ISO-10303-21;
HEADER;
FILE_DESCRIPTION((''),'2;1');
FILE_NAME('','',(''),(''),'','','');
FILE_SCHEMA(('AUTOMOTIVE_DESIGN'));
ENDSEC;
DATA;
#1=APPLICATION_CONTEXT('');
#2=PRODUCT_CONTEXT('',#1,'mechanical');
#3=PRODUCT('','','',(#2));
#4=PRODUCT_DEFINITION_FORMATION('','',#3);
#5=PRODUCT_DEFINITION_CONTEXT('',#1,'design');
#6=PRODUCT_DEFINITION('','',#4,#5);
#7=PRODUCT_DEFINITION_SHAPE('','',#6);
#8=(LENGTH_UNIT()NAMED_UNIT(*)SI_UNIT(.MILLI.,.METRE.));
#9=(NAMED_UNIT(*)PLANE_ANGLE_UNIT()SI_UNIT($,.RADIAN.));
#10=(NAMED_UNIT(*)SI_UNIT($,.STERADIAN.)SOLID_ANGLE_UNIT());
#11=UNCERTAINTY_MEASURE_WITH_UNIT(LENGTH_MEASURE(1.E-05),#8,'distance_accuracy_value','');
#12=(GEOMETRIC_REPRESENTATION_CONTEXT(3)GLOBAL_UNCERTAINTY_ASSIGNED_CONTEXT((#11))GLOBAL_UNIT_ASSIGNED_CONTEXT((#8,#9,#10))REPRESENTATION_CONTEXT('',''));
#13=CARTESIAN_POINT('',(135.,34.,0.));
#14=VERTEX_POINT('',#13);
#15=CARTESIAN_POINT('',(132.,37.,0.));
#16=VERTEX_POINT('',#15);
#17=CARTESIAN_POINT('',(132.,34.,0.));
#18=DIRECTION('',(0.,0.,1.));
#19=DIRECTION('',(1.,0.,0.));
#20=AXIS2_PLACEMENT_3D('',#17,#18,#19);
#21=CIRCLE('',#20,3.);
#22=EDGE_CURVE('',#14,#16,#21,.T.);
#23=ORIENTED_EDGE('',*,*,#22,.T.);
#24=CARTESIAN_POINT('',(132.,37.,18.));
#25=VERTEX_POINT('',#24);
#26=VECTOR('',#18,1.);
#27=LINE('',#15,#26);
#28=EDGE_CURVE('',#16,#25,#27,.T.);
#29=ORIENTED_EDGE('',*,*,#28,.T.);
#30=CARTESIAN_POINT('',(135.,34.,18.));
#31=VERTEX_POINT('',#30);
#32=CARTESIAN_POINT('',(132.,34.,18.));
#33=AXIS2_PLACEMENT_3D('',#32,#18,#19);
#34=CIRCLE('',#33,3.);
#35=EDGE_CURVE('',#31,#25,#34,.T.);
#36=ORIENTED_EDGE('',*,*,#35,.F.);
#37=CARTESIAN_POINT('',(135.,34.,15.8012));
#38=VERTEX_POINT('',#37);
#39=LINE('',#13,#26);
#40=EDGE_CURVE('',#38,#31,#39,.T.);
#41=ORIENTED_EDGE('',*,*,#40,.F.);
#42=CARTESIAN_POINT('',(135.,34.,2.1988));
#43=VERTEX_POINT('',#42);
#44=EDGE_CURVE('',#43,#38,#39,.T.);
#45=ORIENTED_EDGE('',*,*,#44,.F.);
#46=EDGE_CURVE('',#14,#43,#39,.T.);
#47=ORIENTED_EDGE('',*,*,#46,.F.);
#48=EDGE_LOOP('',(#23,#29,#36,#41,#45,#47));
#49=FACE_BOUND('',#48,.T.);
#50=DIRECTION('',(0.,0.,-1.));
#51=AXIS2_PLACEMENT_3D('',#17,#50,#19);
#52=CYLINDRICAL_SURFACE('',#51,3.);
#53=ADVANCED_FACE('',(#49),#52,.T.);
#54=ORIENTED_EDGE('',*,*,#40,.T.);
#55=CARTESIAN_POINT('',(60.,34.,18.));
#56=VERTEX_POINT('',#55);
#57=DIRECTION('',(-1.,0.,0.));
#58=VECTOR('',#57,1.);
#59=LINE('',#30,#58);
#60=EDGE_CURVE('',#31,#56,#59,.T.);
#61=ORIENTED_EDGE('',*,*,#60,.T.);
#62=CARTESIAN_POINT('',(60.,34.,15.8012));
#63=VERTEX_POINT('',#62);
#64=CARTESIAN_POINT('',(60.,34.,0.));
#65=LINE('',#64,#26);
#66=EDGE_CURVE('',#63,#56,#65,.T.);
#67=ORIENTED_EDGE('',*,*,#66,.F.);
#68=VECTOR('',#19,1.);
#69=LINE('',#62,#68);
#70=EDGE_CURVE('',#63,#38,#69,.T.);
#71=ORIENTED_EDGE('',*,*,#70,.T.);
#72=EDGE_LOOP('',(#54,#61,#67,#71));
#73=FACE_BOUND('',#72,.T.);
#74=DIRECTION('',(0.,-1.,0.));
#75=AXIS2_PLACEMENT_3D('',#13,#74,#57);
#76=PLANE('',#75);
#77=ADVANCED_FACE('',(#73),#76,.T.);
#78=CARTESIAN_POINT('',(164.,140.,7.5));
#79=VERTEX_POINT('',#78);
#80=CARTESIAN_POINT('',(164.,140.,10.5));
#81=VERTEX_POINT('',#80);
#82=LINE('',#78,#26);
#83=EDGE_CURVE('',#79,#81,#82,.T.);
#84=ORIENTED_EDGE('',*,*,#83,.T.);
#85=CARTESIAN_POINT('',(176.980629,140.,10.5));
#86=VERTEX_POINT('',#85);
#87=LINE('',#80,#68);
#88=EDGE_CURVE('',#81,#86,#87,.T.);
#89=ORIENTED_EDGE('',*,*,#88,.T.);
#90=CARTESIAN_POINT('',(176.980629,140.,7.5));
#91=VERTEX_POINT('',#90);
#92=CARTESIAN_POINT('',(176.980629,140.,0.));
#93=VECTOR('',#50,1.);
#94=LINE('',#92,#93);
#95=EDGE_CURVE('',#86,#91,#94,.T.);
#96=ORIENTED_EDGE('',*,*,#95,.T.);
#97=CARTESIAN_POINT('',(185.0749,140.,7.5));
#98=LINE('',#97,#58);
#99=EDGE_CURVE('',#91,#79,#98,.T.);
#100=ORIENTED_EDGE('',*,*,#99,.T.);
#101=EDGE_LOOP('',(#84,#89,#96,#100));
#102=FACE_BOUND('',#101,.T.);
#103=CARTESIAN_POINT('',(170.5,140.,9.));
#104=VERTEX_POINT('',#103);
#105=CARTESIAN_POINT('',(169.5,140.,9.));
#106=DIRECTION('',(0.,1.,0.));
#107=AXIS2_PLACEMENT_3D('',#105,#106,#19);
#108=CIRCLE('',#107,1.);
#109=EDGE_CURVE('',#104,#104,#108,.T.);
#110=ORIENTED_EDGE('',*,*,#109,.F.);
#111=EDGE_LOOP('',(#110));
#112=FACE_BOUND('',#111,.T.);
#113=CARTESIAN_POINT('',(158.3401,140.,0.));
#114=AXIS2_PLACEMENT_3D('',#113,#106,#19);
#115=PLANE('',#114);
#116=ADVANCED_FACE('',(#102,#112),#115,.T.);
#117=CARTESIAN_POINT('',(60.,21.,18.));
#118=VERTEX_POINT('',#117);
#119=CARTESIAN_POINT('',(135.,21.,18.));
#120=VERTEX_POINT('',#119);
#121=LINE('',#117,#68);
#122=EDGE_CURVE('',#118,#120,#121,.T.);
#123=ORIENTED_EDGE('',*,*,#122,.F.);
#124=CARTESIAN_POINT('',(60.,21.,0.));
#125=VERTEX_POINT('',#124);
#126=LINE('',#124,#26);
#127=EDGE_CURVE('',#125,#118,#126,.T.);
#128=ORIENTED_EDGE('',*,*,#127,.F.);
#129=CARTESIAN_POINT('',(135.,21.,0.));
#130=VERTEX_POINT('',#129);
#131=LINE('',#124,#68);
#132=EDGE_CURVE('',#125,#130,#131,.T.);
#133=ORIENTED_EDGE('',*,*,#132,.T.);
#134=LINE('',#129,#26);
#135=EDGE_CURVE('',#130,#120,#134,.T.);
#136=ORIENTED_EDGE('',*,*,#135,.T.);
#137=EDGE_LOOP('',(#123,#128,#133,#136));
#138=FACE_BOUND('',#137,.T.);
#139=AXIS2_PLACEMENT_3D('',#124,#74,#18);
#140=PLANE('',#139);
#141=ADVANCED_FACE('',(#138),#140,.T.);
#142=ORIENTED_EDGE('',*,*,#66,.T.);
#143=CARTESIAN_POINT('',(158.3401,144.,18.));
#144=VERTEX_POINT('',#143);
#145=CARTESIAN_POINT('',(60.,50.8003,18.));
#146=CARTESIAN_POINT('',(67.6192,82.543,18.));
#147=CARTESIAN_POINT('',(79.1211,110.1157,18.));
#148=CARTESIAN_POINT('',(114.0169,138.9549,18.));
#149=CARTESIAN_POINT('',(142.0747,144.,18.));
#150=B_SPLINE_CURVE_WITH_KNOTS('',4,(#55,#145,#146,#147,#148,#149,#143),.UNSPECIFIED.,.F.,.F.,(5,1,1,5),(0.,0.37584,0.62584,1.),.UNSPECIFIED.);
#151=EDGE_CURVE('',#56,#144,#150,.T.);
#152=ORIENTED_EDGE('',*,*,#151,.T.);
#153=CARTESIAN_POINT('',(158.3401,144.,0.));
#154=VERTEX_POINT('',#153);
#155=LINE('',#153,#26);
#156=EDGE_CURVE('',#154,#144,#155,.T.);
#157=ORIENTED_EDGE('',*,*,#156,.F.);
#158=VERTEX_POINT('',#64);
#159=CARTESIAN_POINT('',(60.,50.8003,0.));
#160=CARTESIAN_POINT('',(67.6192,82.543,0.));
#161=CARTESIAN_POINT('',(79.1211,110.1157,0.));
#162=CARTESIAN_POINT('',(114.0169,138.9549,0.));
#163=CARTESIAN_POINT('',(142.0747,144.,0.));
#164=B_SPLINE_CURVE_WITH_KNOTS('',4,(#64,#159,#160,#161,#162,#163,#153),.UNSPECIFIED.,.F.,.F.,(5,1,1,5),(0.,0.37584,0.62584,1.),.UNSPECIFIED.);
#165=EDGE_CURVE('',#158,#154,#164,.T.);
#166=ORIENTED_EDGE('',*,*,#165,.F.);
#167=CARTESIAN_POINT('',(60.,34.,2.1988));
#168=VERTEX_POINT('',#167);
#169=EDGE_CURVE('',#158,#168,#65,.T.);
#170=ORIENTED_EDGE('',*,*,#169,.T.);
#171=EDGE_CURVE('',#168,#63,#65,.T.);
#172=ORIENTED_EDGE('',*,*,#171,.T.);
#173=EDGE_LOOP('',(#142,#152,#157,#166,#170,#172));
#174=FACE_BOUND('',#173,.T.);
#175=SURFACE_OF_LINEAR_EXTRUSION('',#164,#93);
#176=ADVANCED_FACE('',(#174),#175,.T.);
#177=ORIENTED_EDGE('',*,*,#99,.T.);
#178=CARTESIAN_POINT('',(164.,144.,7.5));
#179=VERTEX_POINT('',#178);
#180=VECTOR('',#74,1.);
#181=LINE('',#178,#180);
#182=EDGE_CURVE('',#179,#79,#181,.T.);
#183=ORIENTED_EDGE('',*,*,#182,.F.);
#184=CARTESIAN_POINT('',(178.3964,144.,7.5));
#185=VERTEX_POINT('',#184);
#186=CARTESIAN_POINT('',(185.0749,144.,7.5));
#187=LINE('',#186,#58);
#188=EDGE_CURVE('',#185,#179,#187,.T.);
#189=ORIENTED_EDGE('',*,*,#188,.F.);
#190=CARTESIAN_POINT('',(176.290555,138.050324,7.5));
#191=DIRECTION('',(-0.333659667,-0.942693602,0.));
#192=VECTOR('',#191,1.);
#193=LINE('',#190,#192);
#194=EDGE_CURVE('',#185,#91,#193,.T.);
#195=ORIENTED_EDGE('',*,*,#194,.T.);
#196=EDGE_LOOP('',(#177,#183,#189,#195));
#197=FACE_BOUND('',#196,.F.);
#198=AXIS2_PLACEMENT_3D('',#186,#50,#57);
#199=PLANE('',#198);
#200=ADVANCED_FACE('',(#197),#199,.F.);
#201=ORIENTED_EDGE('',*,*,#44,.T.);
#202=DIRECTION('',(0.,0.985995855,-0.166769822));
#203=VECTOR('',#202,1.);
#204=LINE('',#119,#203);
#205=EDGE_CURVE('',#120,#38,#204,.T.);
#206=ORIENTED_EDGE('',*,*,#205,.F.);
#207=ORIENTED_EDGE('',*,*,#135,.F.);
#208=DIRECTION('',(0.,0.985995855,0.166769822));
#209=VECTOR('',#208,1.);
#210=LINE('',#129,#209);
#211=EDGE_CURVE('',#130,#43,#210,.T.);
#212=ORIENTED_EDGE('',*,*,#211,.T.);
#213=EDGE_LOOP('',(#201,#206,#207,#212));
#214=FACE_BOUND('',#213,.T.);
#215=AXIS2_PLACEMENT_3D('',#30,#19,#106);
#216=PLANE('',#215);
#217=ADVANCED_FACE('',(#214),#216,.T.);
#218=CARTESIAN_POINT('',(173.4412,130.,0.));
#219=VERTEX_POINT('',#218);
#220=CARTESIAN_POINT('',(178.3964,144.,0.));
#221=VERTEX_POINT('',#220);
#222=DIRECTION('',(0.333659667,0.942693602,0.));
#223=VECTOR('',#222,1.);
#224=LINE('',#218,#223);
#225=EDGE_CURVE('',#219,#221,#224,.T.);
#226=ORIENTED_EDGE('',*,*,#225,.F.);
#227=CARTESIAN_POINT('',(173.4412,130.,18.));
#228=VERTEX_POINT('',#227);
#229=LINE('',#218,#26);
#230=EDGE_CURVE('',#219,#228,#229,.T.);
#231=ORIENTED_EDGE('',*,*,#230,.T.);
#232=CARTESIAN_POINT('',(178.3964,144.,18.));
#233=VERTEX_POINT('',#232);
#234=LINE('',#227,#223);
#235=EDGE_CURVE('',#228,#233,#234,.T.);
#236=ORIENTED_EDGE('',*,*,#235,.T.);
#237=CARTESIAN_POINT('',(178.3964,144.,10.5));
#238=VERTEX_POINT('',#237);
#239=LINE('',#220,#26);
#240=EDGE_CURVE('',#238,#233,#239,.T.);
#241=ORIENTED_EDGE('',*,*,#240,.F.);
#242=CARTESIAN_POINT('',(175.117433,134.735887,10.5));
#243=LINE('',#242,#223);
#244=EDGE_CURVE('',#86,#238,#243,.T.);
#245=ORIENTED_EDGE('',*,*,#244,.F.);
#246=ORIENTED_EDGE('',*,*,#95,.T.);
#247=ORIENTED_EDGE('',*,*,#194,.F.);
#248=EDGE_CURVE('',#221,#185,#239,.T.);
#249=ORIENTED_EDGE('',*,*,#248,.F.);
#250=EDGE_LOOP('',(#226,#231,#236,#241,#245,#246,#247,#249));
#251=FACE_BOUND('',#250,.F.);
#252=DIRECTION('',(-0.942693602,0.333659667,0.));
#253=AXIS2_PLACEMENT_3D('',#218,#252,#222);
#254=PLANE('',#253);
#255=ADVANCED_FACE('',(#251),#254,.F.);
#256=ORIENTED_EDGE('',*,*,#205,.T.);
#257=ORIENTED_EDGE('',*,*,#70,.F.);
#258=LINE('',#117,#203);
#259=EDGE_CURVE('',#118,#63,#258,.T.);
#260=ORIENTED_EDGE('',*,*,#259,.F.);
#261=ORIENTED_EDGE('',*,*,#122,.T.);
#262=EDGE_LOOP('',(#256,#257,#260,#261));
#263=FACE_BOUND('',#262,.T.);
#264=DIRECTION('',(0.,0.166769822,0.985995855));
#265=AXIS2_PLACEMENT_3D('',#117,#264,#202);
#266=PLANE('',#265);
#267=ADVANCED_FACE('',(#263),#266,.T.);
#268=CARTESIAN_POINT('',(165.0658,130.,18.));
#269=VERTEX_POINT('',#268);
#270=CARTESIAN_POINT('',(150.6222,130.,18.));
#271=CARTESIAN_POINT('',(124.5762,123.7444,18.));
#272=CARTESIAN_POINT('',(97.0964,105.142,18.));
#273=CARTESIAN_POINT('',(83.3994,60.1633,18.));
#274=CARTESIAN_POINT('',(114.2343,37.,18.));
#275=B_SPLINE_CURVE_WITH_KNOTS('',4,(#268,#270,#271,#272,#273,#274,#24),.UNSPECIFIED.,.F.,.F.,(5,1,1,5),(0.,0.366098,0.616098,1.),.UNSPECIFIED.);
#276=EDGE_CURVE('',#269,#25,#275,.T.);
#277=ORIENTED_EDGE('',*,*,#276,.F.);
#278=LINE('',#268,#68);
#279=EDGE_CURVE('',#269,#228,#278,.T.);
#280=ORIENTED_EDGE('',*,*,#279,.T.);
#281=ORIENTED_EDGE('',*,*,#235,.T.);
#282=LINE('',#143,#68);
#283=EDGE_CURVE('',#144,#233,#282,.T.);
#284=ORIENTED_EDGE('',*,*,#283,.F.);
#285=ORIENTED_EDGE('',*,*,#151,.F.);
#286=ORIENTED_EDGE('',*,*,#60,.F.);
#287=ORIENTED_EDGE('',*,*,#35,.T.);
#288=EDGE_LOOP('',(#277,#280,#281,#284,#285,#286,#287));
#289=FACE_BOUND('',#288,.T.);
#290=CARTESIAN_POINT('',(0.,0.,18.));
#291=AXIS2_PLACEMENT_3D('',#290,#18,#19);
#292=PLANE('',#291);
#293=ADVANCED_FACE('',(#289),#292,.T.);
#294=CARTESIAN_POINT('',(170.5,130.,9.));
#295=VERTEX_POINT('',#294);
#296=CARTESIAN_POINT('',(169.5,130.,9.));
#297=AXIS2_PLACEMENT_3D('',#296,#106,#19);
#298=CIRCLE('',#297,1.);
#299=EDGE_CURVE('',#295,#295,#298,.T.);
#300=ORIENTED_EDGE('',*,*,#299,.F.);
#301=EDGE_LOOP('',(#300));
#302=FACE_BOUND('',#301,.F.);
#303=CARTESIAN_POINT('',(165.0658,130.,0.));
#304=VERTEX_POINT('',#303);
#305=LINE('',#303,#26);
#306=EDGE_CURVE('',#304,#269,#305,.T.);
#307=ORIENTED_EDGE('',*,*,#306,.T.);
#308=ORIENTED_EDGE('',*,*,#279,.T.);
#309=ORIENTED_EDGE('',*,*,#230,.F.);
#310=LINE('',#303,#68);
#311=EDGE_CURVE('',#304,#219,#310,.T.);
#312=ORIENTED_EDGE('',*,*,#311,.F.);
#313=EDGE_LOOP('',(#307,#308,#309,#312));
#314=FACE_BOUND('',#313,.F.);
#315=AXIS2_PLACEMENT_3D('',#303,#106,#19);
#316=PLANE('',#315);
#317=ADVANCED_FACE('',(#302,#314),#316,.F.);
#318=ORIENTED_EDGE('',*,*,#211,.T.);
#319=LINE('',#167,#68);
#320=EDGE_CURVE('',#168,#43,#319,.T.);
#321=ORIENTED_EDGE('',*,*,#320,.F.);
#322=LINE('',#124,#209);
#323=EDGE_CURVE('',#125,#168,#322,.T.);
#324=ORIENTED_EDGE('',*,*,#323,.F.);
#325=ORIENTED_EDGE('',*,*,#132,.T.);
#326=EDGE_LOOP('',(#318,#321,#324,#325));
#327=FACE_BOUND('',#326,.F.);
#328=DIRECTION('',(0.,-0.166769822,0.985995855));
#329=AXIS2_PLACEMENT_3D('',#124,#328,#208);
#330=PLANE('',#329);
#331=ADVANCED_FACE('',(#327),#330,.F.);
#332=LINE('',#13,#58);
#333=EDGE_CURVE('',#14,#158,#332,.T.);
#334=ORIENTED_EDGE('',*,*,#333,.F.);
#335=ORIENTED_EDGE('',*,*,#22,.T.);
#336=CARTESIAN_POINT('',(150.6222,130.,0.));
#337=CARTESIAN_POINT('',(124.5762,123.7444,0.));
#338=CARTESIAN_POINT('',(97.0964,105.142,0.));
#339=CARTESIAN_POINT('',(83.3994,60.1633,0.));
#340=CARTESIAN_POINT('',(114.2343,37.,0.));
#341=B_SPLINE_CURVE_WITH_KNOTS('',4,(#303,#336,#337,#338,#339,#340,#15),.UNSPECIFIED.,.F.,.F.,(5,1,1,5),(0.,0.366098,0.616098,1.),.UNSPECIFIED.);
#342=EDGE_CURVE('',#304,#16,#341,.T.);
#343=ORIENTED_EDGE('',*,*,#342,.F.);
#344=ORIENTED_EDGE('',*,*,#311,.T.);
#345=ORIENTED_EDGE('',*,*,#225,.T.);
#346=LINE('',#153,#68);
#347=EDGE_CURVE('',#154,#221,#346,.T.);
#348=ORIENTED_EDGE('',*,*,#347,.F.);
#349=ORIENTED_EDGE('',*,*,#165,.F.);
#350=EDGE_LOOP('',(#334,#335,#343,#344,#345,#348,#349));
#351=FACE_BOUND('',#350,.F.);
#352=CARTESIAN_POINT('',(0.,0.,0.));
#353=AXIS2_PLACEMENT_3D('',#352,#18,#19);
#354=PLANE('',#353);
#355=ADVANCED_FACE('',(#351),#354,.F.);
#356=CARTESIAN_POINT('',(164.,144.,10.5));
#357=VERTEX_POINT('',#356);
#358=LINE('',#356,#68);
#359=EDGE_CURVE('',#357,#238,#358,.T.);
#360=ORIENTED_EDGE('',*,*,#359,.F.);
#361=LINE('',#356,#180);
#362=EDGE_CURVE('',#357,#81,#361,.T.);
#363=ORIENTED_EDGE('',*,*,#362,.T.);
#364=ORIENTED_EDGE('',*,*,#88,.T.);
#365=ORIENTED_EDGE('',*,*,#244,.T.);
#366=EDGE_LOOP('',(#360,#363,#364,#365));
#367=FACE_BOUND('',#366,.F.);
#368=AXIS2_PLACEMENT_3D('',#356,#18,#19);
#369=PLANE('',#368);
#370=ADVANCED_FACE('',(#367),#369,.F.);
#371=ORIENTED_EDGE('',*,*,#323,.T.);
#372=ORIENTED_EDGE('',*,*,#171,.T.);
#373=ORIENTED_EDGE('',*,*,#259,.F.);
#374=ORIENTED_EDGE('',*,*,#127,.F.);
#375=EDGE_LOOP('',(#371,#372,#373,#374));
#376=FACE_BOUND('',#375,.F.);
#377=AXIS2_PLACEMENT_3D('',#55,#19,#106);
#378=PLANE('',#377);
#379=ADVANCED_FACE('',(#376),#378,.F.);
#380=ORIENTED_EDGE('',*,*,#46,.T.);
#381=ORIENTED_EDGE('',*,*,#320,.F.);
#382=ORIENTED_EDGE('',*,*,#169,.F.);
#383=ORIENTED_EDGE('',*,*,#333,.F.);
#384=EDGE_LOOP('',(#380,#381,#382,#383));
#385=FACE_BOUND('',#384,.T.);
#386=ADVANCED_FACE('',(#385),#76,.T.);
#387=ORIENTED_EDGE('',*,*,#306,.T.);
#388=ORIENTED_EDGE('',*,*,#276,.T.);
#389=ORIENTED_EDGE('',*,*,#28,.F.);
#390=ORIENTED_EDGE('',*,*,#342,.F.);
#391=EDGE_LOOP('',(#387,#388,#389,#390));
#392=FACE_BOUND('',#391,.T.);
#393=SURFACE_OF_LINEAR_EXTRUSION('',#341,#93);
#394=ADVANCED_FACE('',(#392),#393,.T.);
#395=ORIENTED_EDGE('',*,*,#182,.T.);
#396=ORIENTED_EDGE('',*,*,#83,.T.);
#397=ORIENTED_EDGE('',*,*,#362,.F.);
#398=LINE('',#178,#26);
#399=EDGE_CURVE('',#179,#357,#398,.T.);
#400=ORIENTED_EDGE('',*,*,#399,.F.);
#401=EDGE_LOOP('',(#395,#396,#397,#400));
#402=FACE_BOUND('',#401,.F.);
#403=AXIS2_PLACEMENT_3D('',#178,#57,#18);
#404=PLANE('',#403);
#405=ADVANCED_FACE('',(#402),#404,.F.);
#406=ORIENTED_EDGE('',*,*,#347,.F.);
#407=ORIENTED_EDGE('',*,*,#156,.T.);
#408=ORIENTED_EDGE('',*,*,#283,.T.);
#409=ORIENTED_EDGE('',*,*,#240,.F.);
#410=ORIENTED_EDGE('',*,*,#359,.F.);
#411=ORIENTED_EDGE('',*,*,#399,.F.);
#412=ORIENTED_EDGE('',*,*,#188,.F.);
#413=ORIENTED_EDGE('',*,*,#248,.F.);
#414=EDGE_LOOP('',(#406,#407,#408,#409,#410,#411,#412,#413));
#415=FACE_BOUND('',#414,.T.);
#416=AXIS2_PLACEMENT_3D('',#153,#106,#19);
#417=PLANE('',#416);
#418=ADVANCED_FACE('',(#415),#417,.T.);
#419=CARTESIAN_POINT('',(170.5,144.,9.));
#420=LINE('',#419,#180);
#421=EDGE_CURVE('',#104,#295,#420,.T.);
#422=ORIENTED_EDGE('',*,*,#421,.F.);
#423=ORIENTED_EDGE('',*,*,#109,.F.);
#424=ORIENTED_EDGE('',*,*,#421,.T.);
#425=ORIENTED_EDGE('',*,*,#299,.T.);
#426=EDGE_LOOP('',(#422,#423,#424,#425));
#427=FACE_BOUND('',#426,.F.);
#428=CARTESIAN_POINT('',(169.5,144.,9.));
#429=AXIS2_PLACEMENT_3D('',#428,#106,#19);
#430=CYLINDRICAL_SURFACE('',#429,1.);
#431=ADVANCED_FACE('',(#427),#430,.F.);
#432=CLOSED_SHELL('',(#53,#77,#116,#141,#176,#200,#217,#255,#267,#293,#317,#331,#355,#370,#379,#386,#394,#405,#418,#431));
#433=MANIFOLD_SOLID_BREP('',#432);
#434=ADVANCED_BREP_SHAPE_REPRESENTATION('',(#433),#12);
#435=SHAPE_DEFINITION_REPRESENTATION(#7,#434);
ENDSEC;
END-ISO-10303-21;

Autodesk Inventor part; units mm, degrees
ref_plane "XZ Plane" through (0, 0, 0) normal (0, 1, 0) x (-1, 0, 0)
ref_plane "XY Plane" through (0, 0, 0) normal (0, 0, 1) x (1, 0, 0)
sketch "Sketch1" plane through (0, 0, 0) normal (0, 0, 1) x (1, 0, 0)
  line L0 (60, 34) -> (279, 34) construction
  line L1 (279, 34) -> (279, 16) construction
  line L2 (279, 16) -> (60, 16) construction
  line L3 (60, 16) -> (60, 34) construction
  line L4 (158.3401, 144) -> (180.6599, 144)
  line L5 (-98.1271, 119.3914) -> (-155.2055, 119.3914) construction
  line L6 (60, 204.7828) -> (279, 204.7828) construction
  line L7 (279, 204.7828) -> (279, 222.7828) construction
  line L8 (279, 222.7828) -> (60, 222.7828) construction
  line L9 (60, 222.7828) -> (60, 204.7828) construction
  line L10 (158.3401, 94.7828) -> (180.6599, 94.7828) construction
  line L11 (169.5, 144) -> (169.5, 94.7828) construction
  circle A0 centre (169.5, 144.5) radius 4.5 construction
  circle A1 centre (169.5, 94.2828) radius 4.5 construction
  line L12 (165, 140) -> (174, 140) construction
  spline S0 degree 4 poles (60, 34) (60, 50.8003) (67.6192, 82.543) (79.1211, 110.1157) (114.0169, 138.9549) (142.0747, 144) (158.3401, 144) knots 0 0 0 0 0 0.37584 0.62584 1 1 1 1 1
  line L13 (436.9307, -63.7999) -> (436.9307, -111.3151) construction
  line L14 (165.0658, 130) -> (173.4412, 130)
  line L15 (173.4412, 130) -> (178.3964, 144)
  line L16 (178.3964, 144) -> (180.6599, 144)
  line L17 (166.2744, 149) -> (172.7256, 149) construction
  spline S1 degree 4 poles (165.0658, 130) (150.6222, 130) (124.5762, 123.7444) (97.0964, 105.142) (83.3994, 60.1633) (114.2343, 37) (132, 37) knots 0 0 0 0 0 0.366098 0.616098 1 1 1 1 1
  line L18 (158.3401, 94.7828) -> (180.6599, 94.7828) construction
  line L19 (178.3964, 94.7828) -> (180.6599, 94.7828) construction
  line L20 (180.6599, 94.7828) -> (158.3401, 94.7828) construction
  spline S2 degree 4 poles (173.9342, 106.4847) (188.3699, 106.4847) (225.2165, 124.0597) (250.4536, 142.2568) (239.0722, 211.617) (207.7908, 202.4847) knots 0 0 0 0 0 0.376784 1 1 1 1 1 construction
  spline S3 degree 4 poles (279, 204.7828) (275.6992, 148.3745) (255.9313, 132.0927) (229.7092, 97.2581) (180.6599, 94.7828) knots 0 0 0 0 0 1 1 1 1 1 construction
  line L21 (173.9342, 106.4847) -> (158.8804, 106.4847) construction
  line L22 (160.6036, 94.7828) -> (158.3401, 94.7828) construction
  line L23 (158.8804, 106.4847) -> (160.6036, 94.7828) construction
  arc A2 (135, 34) -> (132, 37) centre (132, 34) ccw
  line L24 (135, 34) -> (60, 34)
  point P0 (0, 0)
  point P1 (169.5, 34)
  point P2 (169.5, 204.7828)
  point P3 (93.4315, 204.7828)
  point P4 (169.5, 140)
  point P5 (69.0653, 81.3021)
  point P6 (84.771, 109.712)
  point P7 (114.2865, 133.8506)
  point P8 (169.5, 149)
  point P9 (126.5497, 121.1282)
  point P10 (101.7633, 99.5435)
  point P11 (94.9383, 64.5723)
  point P12 (209.9254, 118.4197)
  point P13 (233.3153, 142.9189)
  point P14 (236.6483, 184.5924)
  point P15 (268.3461, 156.1626)
  point P16 (250.8428, 129.4297)
  point P17 (224.4145, 107.9607)
  dimension "d0" = 18
  dimension "d2" = 219
  dimension "d4" = 16
  dimension "d5" = 60
  dimension "d6" = 110
  dimension "d9" = 9
  dimension "d11" = 10
  dimension "exposed" = 5
  dimension "d13" = 14
  dimension "d23" = 3
  dimension "d43" = 75
  dimension "d48" = 109.5
extrude "Extrusion1" add sketch "Sketch1" along normal blind 18
sketch "Sketch4" plane through (158.3401, 144, 0) normal (0, 1, 0) x (1, 0, 0)
  line L0 (-98.3401, -118.5) -> (120.6599, -118.5) construction
  line L1 (120.6599, -118.5) -> (120.6599, 100.5) construction
  line L2 (120.6599, 100.5) -> (-98.3401, 100.5) construction
  circle A0 centre (11.1599, -9) radius 1
  line L3 (-98.3401, 0) -> (-98.3401, -18) projected
  line L4 (20.0563, 0) -> (20.0563, -18) projected
  point P0 (-158.3401, 0)
  point P1 (11.1599, -118.5)
  point P2 (120.6599, -9)
  point P3 (20.0563, -9)
  dimension "d30" = 219
  dimension "d31" = 219
  dimension "d32" = 2
  dimension "d49" = 109.5
extrude "Extrusion5" cut sketch "Sketch4" against normal through all
sketch "Sketch5" plane through (158.3401, 144, 0) normal (0, 1, 0) x (1, 0, 0)
  line L0 (26.7348, -7.5) -> (5.6599, -7.5)
  line L1 (5.6599, -7.5) -> (5.6599, -10.5)
  line L2 (5.6599, -10.5) -> (26.7348, -10.5)
  line L3 (26.7348, -10.5) -> (26.7348, -7.5)
  circle A0 centre (11.1599, -9) radius 1 projected
  line L4 (6.6599, -8.6) -> (15.6599, -8.6) construction
  line L5 (15.6599, -8.6) -> (15.6599, -9.4) construction
  line L6 (15.6599, -9.4) -> (6.6599, -9.4) construction
  line L7 (6.6599, -9.4) -> (6.6599, -8.6) construction
  point P0 (-158.3401, 0)
  point P1 (5.6599, -9)
  point P2 (6.6599, -9)
  point P3 (11.1599, -8.6)
  point P4 (11.1599, -10.5)
  point P5 (11.1599, -7.5)
  dimension "d35" = 3
  dimension "d36" = 9
  dimension "d37" = 0.8
  dimension "d41" = 1
extrude "Extrusion6" cut sketch "Sketch5" against normal blind 4 contours L3 L2 L1 L0 | A0
ref_plane "Work Plane3" through (60, 34, 18) normal (1, 0, 0) x (0, 1, 0)
sketch "Sketch6" plane through (60, 34, 18) normal (1, 0, 0) x (0, 1, 0)
  line L0 (-13, -18) -> (-13, 0)
  line L1 (0, -18) -> (0, 0) projected
  line L2 (-13, -18) -> (0, -15.8012)
  line L3 (0, -18) -> (0, 0) projected
  line L4 (0, -15.8012) -> (-9.0304, -15.8012) construction
  line L5 (-15.1424, -9) -> (-18.4796, -9) construction
  line L6 (-13, 0) -> (0, -2.1988)
  point P0 (-34, -18)
  point P1 (-16.811, -9)
  point P2 (-13, -9)
  dimension "d44" = 13
  dimension "d45" = 9.6
extrude "Extrusion7" add sketch "Sketch6" along normal up to surface (75 mm away)
properties part number "TNS-1-arm"
